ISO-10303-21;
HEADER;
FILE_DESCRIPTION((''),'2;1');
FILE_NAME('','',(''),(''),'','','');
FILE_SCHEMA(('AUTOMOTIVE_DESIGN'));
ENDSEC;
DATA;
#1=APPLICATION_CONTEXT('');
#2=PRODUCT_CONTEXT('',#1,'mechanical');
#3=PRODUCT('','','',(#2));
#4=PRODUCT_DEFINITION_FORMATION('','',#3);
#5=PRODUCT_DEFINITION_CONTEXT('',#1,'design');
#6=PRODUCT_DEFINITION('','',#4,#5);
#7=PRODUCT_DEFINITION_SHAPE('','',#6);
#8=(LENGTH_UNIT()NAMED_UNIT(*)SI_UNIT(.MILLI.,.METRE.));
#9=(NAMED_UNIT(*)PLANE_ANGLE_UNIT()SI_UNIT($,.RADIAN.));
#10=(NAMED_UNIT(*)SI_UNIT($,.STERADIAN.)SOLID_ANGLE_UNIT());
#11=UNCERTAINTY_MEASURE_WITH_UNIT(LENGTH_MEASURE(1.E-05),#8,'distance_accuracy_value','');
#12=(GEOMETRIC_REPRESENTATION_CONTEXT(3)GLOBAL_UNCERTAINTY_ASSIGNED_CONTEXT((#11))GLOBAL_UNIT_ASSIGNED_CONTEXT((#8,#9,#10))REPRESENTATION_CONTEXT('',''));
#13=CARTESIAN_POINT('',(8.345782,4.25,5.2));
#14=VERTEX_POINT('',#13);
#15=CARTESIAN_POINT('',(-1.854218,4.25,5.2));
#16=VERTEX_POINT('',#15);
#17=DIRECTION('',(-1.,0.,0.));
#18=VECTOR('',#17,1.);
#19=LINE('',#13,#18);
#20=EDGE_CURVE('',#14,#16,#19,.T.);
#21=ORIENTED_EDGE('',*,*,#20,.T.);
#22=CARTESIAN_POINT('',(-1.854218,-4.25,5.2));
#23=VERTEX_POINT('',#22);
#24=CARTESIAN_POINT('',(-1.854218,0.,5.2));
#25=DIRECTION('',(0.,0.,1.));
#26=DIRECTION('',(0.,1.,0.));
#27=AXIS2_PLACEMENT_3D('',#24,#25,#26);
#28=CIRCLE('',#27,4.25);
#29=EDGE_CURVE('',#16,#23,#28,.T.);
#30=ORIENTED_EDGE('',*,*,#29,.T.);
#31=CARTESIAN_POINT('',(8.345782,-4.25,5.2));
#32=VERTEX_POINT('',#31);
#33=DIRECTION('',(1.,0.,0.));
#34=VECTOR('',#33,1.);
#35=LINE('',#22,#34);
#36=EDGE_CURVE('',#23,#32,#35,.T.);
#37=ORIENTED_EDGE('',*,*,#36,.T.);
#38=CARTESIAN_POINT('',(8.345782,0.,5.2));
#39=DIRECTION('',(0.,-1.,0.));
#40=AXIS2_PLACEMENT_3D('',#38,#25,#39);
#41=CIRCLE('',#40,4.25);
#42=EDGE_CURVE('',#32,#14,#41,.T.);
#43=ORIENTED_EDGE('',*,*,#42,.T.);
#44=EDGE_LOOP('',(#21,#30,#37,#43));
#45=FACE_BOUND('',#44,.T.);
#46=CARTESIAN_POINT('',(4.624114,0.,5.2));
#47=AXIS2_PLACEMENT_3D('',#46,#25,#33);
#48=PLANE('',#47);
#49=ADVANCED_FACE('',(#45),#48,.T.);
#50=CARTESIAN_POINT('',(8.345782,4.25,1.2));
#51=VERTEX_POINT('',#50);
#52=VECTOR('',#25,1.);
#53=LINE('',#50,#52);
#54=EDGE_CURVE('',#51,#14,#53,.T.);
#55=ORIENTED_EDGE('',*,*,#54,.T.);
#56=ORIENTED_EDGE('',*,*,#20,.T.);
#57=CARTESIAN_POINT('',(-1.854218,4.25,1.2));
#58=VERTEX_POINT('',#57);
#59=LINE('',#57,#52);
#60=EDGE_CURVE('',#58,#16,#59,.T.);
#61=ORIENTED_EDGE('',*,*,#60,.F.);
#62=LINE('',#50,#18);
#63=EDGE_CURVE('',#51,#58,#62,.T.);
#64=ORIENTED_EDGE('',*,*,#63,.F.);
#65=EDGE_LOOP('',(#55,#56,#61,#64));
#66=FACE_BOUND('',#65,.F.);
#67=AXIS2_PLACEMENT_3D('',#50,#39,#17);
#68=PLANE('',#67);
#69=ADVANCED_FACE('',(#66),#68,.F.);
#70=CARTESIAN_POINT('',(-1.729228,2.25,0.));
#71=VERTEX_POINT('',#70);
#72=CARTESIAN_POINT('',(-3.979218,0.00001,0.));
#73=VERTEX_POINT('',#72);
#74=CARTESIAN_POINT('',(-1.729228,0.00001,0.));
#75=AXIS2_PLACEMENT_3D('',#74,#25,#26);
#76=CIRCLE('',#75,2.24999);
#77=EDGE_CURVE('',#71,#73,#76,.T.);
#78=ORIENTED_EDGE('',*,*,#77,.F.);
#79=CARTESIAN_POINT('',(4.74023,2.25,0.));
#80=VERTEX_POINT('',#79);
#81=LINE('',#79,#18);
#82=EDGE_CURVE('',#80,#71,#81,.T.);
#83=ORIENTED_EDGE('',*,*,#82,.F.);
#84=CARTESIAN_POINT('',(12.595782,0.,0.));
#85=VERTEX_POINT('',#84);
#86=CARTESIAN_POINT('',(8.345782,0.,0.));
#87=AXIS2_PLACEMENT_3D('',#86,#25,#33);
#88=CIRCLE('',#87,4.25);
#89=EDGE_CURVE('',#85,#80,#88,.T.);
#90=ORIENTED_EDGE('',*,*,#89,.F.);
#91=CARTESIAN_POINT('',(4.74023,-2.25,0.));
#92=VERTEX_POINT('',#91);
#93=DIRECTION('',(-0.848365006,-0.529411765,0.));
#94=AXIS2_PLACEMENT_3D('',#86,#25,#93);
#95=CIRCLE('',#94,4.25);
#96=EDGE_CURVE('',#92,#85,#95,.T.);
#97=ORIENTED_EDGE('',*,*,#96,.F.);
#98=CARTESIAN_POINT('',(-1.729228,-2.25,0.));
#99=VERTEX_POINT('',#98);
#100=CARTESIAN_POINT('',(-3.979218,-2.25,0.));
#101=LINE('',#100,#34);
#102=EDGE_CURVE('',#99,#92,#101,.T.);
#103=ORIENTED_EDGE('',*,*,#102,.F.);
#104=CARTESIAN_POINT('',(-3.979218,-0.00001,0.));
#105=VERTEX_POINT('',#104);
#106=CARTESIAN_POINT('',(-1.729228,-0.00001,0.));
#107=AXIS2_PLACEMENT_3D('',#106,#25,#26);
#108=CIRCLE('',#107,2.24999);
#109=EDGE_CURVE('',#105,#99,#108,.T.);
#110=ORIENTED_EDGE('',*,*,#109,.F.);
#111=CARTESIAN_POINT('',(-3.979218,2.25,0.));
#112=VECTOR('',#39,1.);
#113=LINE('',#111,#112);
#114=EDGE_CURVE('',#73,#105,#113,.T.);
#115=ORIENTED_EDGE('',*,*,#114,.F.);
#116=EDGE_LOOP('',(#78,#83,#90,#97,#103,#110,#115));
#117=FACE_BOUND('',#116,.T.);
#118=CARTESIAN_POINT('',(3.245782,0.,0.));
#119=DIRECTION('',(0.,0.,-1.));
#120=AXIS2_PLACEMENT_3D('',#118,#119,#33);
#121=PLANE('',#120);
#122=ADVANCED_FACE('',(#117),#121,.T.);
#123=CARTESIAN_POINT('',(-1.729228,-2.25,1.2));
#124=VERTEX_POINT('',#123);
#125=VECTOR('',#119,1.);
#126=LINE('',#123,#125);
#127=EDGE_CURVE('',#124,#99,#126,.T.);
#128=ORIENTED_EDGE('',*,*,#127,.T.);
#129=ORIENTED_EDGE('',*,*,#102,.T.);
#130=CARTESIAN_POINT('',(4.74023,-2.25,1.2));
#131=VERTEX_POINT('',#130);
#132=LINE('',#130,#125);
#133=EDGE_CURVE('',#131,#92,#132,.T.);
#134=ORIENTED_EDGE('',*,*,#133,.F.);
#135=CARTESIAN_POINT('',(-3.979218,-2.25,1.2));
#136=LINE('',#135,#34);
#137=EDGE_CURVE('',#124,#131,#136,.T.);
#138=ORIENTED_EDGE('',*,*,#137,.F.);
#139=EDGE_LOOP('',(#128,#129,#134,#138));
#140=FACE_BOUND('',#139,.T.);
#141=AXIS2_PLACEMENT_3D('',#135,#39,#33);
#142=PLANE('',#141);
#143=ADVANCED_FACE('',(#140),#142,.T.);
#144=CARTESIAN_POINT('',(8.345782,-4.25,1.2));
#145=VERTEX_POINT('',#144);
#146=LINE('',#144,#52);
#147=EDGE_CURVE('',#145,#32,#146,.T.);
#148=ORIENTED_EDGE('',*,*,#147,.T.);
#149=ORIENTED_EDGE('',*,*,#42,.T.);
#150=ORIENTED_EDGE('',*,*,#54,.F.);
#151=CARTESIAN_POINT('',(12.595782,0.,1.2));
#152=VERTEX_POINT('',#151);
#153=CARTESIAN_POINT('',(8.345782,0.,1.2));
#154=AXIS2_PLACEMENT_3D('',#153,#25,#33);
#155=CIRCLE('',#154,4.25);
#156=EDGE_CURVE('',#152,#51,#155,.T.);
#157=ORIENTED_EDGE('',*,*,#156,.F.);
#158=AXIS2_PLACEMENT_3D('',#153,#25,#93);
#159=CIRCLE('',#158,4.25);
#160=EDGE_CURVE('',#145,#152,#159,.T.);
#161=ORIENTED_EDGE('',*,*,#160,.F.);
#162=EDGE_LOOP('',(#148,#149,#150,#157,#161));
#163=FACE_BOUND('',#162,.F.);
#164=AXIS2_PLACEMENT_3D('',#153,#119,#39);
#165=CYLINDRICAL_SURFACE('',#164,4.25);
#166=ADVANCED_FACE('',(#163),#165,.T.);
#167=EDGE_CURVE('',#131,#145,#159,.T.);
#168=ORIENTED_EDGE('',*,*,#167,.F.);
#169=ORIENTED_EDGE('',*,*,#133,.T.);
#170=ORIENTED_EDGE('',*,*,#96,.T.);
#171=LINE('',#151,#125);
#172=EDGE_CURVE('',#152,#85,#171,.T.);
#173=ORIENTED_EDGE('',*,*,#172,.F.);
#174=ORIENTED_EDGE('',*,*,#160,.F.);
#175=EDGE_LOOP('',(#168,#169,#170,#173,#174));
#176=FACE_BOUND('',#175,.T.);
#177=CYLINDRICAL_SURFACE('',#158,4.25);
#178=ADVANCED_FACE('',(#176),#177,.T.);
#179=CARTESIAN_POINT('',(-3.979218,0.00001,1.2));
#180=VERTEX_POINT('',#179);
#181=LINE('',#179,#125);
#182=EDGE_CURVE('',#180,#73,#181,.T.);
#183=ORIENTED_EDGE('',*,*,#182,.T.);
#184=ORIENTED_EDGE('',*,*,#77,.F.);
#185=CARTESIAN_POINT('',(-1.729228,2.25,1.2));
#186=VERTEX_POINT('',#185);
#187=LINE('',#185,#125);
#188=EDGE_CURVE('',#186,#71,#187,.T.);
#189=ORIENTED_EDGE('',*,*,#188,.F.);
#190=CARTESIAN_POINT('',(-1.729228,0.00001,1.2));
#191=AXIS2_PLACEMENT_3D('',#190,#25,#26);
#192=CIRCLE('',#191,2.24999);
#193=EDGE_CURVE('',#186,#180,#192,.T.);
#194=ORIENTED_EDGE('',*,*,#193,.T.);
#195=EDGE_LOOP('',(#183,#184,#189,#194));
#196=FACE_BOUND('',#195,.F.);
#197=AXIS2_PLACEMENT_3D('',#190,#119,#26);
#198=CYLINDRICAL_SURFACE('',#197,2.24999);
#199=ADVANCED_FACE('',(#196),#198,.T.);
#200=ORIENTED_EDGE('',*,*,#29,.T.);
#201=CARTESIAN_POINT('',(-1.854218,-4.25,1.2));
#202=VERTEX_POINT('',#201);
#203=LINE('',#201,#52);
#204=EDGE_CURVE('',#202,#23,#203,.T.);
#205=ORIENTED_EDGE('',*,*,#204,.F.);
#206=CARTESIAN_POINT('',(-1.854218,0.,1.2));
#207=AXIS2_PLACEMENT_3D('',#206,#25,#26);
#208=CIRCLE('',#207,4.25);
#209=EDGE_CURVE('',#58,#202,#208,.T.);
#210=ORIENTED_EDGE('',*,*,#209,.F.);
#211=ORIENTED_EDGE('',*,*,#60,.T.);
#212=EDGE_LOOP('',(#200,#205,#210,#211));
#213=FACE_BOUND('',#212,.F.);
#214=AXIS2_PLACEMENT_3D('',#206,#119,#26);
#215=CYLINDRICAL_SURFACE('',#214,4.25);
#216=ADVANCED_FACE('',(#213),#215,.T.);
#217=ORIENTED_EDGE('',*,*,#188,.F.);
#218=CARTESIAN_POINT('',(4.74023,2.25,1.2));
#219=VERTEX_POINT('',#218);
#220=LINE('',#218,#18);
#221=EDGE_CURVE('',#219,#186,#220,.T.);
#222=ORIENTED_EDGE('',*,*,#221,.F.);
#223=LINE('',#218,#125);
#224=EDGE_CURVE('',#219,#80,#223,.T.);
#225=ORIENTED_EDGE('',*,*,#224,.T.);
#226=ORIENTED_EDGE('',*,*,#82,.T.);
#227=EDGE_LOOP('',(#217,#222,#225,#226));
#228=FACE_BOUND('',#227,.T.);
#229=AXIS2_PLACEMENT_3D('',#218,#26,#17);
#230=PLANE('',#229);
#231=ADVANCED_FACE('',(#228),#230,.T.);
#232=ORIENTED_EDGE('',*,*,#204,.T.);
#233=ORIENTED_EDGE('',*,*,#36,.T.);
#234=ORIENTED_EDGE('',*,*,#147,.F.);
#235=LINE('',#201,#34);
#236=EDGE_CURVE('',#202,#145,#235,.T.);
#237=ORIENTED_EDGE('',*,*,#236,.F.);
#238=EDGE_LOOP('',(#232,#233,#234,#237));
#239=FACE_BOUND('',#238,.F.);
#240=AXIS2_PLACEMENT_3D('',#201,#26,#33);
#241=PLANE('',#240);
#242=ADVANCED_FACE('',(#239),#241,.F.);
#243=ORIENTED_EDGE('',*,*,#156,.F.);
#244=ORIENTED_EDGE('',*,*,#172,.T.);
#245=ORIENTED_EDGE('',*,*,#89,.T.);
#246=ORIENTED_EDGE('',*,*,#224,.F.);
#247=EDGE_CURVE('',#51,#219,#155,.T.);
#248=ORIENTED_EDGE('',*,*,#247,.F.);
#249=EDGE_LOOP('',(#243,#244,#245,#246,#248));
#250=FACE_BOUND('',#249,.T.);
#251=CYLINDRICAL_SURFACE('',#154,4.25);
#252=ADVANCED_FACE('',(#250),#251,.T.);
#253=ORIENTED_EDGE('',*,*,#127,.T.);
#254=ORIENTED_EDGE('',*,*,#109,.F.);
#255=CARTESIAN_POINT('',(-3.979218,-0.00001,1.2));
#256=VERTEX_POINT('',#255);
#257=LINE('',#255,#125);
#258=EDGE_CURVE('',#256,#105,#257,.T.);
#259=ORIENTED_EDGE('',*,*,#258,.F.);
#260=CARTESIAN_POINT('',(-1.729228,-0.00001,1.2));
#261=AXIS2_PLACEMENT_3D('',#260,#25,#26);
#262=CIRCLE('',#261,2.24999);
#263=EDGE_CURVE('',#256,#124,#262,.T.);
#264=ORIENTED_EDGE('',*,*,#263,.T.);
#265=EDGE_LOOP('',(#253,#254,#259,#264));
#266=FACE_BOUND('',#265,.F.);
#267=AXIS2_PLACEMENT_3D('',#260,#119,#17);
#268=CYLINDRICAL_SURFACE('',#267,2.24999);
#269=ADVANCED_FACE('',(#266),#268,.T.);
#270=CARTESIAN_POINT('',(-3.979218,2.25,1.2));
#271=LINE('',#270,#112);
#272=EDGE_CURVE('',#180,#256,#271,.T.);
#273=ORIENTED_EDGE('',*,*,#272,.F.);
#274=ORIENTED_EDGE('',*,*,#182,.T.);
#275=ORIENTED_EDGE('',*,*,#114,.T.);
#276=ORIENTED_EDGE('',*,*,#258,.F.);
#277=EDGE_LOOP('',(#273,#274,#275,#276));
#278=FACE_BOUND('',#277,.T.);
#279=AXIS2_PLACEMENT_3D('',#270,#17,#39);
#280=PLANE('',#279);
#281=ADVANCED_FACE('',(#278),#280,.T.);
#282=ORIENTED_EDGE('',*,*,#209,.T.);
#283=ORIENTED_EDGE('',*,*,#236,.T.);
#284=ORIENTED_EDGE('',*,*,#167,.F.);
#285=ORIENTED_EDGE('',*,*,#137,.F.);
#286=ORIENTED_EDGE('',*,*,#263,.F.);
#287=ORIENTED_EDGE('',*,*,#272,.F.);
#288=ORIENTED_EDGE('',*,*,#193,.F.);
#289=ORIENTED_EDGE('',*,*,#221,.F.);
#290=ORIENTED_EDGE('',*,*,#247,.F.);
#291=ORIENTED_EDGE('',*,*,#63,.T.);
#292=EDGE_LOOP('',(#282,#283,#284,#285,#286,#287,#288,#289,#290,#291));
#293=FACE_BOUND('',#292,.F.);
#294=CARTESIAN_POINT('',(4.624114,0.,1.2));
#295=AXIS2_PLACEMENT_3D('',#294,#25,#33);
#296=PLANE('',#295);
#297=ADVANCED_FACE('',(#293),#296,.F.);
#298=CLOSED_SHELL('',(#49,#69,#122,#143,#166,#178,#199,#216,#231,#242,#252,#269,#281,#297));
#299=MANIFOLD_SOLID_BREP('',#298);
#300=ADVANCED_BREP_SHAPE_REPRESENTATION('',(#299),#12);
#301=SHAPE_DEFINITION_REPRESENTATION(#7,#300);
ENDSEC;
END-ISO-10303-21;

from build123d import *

# Parameters (mm, degrees)
F6_W      = 19.1
F6_H      = 8.9
F7_DEPTH  = 1.2
F10_DEPTH = 1.2
F11_R     = 2.24999
F12_W     = 19.1
F12_H     = 8.9
F13_DEPTH = 4.2
F14_DEPTH = 4
F15_W     = 19.1
F15_H     = 8.9
F16_DEPTH = 5.2


# Not quite as in the source:
# - a fillet or chamfer is up to 0.001 mm smaller than in the source, because OpenCascade refuses the exact size


with BuildPart() as f7:
    # F6 (on Top) → F7 (new body, through all)
    with BuildSketch(Plane.XY):
        with Locations((3.24578159, 0)):
            Rectangle(F6_W, F6_H)
    extrude(amount=F7_DEPTH)

    # F8 (on face) → F10 (cut, through all)
    with BuildSketch(Plane.XY.offset(1.2)):
        with BuildLine():
            Line((4.7402303145, 2.25), (-3.97921841, 2.25))
            Line((-3.97921841, 2.25), (-3.97921841, -2.25))
            Line((-3.97921841, -2.25), (4.7402303145, -2.25))
            ThreePointArc((4.7402303145, -2.25), (4.09578159, 0), (4.7402303145, 2.25))
        make_face()
        with BuildLine():
            ThreePointArc((12.59578159, 0), (9.5160181215, 4.0857124789), (4.7402303145, 2.25))
            ThreePointArc((4.7402303145, 2.25), (4.09578159, 0), (4.7402303145, -2.25))
            ThreePointArc((4.7402303145, -2.25), (9.5160181215, -4.0857124789), (12.59578159, 0))
        make_face()
    extrude(amount=-F10_DEPTH, mode=Mode.SUBTRACT)

    # F11 (radius 2.25 in the source; OpenCascade refuses exactly that, so slightly less here)
    f11_edges = [f7.edges().sort_by_distance(p)[0] for p in [
        (-3.979218, 2.25, 0.6),
        (-3.979218, -2.25, 0.6),
    ]]
    fillet(f11_edges, radius=F11_R)

    # F12 (on face) → F13 (join)
    with BuildSketch(Plane.XY.offset(1.2)):
        with Locations((3.24578159, 0)):
            Rectangle(F12_W, F12_H)
    extrude(amount=F13_DEPTH)

    # F9 (on offset) → F14 (cut, through all)
    with BuildSketch(Plane.XY.offset(1.2)):
        with BuildLine():
            Line((-1.85421841, -4.25), (8.34578159, -4.25))
            ThreePointArc((8.34578159, -4.25), (12.59578159, 0), (8.34578159, 4.25))
            Line((8.34578159, 4.25), (-1.85421841, 4.25))
            ThreePointArc((-1.85421841, 4.25), (1.15098541, 3.00520382), (2.39578159, 0))
            ThreePointArc((2.39578159, 0), (1.15098541, -3.00520382), (-1.85421841, -4.25))
        make_face()
        with BuildLine():
            ThreePointArc((-1.85421841, 4.25), (-6.10421841, 0), (-1.85421841, -4.25))
            ThreePointArc((-1.85421841, -4.25), (1.15098541, -3.00520382), (2.39578159, 0))
            ThreePointArc((2.39578159, 0), (1.15098541, 3.00520382), (-1.85421841, 4.25))
        make_face()
    extrude(amount=F14_DEPTH, mode=Mode.SUBTRACT)


with BuildPart() as f16:
    # F15 (on face) → F16 (new body, through all)
    with BuildSketch(Plane(origin=(0, 0, 0), x_dir=(1, 0, 0), z_dir=(0, 0, -1))):
        with Locations((3.24578159, 0)):
            Rectangle(F15_W, F15_H)
    extrude(amount=-F16_DEPTH)

    # F17: cut F7
    add(f7.part, mode=Mode.SUBTRACT)


solid = f16.part
